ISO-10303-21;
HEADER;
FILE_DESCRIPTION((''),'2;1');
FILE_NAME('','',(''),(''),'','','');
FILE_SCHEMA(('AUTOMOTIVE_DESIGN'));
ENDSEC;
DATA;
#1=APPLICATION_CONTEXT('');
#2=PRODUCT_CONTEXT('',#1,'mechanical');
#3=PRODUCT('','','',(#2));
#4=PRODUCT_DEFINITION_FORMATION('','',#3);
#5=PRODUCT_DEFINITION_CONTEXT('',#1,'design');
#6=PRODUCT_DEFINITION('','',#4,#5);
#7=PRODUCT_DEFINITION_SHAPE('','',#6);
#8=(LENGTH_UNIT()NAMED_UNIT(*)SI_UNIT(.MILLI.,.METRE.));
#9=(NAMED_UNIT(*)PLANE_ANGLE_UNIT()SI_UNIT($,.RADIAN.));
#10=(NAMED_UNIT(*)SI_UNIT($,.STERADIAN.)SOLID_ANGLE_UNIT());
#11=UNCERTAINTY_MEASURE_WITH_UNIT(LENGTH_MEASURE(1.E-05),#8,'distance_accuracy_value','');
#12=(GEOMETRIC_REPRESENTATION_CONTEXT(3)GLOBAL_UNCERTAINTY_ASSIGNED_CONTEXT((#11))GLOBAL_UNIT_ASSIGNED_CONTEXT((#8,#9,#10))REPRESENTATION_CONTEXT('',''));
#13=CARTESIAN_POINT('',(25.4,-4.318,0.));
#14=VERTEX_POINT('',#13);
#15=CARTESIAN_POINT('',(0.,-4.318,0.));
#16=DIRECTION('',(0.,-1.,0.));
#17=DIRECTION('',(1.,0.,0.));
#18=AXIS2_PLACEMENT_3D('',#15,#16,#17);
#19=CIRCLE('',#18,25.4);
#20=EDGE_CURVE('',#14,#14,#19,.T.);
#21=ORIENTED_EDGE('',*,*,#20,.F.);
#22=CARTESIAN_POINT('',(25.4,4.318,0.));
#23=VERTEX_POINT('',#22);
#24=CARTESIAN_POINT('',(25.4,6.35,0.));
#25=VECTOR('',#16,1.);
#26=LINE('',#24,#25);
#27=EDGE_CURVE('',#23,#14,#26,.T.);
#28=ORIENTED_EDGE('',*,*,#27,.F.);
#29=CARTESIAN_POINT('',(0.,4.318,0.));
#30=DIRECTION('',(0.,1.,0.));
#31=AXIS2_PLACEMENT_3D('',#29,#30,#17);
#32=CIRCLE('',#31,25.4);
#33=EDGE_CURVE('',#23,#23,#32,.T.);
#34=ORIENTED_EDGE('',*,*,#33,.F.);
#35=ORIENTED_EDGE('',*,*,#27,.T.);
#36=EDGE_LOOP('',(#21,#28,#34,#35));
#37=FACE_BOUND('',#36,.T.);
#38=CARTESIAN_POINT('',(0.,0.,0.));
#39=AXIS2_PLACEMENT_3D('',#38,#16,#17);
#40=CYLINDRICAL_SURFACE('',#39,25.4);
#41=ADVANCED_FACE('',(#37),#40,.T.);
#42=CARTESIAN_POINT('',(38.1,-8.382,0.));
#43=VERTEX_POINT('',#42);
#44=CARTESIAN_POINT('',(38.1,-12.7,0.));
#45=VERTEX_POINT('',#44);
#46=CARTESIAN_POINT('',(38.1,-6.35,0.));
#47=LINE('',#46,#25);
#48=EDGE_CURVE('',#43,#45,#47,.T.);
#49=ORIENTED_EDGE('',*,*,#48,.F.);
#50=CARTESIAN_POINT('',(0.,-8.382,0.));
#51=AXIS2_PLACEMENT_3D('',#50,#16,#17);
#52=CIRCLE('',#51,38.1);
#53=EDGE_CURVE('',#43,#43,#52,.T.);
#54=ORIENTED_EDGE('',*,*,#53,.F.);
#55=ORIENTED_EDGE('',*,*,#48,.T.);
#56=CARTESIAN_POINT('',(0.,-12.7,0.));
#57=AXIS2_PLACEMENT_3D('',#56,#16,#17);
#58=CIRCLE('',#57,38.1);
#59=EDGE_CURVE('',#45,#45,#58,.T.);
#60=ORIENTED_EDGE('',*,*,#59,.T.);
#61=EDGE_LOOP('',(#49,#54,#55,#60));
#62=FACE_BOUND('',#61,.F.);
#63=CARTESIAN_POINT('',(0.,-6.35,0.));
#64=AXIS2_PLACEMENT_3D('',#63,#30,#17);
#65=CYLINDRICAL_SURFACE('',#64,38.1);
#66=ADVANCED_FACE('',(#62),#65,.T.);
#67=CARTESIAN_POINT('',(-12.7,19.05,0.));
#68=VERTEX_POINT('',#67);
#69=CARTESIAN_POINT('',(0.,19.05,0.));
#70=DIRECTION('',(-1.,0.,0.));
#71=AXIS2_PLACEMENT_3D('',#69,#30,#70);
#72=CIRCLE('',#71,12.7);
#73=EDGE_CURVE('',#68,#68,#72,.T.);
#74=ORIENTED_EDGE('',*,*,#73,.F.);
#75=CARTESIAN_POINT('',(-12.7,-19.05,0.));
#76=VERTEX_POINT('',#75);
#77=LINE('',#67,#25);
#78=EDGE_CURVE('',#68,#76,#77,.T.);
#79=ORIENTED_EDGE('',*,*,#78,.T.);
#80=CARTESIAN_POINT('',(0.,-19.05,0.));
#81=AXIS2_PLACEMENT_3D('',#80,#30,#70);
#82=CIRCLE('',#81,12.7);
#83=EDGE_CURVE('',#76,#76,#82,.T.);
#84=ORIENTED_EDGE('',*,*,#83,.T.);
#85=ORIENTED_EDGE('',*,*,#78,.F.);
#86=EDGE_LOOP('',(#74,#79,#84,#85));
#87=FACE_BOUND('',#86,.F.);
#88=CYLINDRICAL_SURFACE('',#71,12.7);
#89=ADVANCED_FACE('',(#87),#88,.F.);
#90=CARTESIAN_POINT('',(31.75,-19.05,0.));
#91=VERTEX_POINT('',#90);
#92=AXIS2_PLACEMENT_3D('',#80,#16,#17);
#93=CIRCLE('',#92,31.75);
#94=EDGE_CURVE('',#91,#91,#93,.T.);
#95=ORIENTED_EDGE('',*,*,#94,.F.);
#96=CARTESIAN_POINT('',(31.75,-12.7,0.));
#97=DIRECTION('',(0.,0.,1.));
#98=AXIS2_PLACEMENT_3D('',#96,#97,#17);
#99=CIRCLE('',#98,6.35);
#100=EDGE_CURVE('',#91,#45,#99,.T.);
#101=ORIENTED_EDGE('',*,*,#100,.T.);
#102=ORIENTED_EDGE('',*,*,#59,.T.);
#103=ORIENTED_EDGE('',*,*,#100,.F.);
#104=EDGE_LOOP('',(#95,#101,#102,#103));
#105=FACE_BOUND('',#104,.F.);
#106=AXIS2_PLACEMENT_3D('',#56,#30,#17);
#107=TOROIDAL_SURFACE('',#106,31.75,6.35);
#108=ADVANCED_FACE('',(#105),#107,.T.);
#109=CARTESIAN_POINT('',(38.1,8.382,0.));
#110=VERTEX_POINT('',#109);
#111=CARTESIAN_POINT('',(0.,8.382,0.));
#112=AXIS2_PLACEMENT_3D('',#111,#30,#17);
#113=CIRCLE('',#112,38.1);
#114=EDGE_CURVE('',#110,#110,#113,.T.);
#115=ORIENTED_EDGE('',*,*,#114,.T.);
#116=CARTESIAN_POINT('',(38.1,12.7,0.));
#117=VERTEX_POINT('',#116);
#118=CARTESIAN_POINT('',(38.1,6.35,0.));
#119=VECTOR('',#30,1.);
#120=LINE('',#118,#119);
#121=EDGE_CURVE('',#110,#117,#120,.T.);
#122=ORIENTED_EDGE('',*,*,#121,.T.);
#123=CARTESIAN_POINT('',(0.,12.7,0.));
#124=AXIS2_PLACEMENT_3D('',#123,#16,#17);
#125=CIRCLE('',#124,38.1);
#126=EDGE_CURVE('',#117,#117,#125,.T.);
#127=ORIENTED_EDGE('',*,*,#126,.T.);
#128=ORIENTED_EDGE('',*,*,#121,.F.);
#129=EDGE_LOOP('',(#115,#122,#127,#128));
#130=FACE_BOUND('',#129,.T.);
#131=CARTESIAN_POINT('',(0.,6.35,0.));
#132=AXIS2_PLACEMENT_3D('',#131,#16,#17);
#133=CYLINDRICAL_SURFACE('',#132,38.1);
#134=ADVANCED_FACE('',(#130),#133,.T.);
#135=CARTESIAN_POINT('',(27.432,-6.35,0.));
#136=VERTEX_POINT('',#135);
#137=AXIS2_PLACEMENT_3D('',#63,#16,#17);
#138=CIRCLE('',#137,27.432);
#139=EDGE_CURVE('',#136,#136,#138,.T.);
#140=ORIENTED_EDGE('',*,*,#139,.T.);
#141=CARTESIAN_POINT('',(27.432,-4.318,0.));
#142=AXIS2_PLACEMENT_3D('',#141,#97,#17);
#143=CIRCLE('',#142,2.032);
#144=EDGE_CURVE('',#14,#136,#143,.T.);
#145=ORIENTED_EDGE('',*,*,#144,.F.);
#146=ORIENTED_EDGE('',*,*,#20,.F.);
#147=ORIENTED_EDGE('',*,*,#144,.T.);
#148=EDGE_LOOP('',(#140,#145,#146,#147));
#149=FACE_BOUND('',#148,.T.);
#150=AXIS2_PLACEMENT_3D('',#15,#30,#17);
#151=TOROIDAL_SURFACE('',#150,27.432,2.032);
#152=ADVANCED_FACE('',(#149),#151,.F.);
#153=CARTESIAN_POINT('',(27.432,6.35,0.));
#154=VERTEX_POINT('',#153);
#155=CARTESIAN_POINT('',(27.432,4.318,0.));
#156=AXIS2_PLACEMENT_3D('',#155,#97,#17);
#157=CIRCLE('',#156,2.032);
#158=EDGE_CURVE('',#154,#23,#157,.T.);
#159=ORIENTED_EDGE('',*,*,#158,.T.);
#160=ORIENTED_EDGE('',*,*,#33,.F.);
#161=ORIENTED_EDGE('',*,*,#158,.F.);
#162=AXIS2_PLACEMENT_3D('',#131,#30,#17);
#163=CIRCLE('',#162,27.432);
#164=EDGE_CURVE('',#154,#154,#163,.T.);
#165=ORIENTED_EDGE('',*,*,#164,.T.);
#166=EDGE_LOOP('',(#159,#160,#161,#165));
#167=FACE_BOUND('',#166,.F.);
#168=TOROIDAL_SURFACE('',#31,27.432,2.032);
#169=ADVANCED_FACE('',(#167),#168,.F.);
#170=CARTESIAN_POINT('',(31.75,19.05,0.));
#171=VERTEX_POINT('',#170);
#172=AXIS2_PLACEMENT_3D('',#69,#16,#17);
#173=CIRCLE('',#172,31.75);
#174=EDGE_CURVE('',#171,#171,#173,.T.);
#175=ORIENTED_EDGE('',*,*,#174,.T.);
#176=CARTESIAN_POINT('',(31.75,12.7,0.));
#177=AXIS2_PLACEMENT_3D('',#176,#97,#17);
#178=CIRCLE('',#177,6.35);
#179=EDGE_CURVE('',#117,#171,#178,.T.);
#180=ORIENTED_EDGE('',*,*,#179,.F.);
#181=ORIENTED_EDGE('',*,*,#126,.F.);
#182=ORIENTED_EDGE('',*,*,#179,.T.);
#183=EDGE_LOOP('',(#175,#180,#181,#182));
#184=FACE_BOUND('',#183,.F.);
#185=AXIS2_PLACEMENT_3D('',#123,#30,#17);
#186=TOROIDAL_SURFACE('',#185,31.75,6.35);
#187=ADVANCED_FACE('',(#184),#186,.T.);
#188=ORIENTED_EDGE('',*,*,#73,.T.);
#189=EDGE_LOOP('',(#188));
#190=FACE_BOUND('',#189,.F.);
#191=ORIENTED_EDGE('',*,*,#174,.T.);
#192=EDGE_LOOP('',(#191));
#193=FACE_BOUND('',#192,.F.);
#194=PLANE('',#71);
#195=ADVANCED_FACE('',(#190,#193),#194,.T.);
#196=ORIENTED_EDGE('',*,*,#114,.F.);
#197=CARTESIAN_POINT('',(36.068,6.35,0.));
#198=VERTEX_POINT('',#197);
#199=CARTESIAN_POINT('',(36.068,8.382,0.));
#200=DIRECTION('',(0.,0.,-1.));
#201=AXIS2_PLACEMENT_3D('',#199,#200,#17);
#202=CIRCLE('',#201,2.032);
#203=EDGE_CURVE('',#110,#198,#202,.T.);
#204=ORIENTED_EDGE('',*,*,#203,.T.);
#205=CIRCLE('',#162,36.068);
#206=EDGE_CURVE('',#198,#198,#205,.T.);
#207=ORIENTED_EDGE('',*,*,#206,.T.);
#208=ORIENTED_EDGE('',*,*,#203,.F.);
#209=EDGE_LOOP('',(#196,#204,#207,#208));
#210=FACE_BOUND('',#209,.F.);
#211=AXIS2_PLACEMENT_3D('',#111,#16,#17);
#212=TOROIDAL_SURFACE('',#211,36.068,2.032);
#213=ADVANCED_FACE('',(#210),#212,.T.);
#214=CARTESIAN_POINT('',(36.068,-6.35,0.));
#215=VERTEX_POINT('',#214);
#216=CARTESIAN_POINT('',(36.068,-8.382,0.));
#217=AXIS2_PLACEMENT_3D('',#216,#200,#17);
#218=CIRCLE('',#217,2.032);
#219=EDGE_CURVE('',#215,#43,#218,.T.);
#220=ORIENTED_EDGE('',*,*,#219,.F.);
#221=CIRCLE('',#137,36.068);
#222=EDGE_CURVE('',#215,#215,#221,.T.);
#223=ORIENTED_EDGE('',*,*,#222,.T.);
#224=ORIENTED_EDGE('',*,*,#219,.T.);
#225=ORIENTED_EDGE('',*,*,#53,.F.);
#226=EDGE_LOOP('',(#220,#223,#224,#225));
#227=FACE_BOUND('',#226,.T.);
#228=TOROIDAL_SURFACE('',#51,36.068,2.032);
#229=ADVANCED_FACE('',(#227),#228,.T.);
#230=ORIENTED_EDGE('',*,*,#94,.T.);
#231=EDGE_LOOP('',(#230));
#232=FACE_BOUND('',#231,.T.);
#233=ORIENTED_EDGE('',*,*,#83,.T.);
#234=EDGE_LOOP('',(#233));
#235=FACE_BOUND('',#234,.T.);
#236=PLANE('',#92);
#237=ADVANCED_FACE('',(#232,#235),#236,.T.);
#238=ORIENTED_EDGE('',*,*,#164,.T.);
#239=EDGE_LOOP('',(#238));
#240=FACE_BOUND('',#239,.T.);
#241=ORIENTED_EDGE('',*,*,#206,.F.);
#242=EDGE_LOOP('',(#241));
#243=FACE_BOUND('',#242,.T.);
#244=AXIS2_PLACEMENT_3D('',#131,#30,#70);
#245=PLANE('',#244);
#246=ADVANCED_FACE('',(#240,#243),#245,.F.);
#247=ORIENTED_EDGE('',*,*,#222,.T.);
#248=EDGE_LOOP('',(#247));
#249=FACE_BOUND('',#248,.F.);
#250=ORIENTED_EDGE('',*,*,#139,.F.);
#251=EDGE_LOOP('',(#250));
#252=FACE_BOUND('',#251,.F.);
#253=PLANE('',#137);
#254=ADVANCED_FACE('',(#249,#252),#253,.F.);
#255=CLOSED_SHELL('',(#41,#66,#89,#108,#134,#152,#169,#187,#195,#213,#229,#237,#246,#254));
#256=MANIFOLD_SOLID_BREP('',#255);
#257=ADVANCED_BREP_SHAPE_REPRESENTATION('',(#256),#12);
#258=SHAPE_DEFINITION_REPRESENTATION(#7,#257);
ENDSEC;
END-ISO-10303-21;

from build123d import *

# Parameters (mm, degrees)
F0_R     = 25.4
F1_DEPTH = 6.35
F2_R     = 38.1
F2_R_2   = 25.4
F3_DEPTH = 12.7
F4_R     = 38.1
F4_R_2   = 25.4
F5_DEPTH = 12.7
F6_R     = 12.7
F7_DEPTH = 38.1
F8_R     = 6.35
F9_R     = 2.032


# Not quite as in the source:
# - a pattern or mirror of a feature is missing from the dataset's text; its kind, count and spacing are read off the source's solid


with BuildPart() as f1:
    # F0 (on Front) → F1 (new body, symmetric)
    with BuildSketch(Plane.XZ):
        Circle(F0_R)
    extrude(amount=F1_DEPTH, both=True)

    # F2 (on face) → F3 (join)
    with BuildSketch(Plane.XZ.offset(6.35)):
        Circle(F2_R)
        Circle(F2_R_2, mode=Mode.SUBTRACT)
        Circle(F2_R_2)
    f3 = extrude(amount=F3_DEPTH)

    # F3_copies: F3 across plane
    add(f3.mirror(Plane.ZX))

    # F4 (on face) → F5 (join)
    with BuildSketch(Plane(origin=(0, 6.35, 0), x_dir=(-1, 0, 0), z_dir=(0, 1, 0))):
        Circle(F4_R)
        Circle(F4_R_2, mode=Mode.SUBTRACT)
    extrude(amount=F5_DEPTH)

    # F6 (on face) → F7 (cut)
    with BuildSketch(Plane(origin=(0, 19.05, 0), x_dir=(-1, 0, 0), z_dir=(0, 1, 0))):
        Circle(F6_R)
    extrude(amount=-F7_DEPTH, mode=Mode.SUBTRACT)

    # F8
    f8_edges = [f1.edges().sort_by_distance(p)[0] for p in [
        (-38.1, 19.05, 0),
        (-38.1, -19.05, 0),
    ]]
    fillet(f8_edges, radius=F8_R)

    # F9
    f9_edges = [f1.edges().sort_by_distance(p)[0] for p in [
        (-25.4, 6.35, 0),
        (-38.1, 6.35, 0),
        (-38.1, -6.35, 0),
        (-25.4, -6.35, 0),
    ]]
    fillet(f9_edges, radius=F9_R)


solid = f1.part
